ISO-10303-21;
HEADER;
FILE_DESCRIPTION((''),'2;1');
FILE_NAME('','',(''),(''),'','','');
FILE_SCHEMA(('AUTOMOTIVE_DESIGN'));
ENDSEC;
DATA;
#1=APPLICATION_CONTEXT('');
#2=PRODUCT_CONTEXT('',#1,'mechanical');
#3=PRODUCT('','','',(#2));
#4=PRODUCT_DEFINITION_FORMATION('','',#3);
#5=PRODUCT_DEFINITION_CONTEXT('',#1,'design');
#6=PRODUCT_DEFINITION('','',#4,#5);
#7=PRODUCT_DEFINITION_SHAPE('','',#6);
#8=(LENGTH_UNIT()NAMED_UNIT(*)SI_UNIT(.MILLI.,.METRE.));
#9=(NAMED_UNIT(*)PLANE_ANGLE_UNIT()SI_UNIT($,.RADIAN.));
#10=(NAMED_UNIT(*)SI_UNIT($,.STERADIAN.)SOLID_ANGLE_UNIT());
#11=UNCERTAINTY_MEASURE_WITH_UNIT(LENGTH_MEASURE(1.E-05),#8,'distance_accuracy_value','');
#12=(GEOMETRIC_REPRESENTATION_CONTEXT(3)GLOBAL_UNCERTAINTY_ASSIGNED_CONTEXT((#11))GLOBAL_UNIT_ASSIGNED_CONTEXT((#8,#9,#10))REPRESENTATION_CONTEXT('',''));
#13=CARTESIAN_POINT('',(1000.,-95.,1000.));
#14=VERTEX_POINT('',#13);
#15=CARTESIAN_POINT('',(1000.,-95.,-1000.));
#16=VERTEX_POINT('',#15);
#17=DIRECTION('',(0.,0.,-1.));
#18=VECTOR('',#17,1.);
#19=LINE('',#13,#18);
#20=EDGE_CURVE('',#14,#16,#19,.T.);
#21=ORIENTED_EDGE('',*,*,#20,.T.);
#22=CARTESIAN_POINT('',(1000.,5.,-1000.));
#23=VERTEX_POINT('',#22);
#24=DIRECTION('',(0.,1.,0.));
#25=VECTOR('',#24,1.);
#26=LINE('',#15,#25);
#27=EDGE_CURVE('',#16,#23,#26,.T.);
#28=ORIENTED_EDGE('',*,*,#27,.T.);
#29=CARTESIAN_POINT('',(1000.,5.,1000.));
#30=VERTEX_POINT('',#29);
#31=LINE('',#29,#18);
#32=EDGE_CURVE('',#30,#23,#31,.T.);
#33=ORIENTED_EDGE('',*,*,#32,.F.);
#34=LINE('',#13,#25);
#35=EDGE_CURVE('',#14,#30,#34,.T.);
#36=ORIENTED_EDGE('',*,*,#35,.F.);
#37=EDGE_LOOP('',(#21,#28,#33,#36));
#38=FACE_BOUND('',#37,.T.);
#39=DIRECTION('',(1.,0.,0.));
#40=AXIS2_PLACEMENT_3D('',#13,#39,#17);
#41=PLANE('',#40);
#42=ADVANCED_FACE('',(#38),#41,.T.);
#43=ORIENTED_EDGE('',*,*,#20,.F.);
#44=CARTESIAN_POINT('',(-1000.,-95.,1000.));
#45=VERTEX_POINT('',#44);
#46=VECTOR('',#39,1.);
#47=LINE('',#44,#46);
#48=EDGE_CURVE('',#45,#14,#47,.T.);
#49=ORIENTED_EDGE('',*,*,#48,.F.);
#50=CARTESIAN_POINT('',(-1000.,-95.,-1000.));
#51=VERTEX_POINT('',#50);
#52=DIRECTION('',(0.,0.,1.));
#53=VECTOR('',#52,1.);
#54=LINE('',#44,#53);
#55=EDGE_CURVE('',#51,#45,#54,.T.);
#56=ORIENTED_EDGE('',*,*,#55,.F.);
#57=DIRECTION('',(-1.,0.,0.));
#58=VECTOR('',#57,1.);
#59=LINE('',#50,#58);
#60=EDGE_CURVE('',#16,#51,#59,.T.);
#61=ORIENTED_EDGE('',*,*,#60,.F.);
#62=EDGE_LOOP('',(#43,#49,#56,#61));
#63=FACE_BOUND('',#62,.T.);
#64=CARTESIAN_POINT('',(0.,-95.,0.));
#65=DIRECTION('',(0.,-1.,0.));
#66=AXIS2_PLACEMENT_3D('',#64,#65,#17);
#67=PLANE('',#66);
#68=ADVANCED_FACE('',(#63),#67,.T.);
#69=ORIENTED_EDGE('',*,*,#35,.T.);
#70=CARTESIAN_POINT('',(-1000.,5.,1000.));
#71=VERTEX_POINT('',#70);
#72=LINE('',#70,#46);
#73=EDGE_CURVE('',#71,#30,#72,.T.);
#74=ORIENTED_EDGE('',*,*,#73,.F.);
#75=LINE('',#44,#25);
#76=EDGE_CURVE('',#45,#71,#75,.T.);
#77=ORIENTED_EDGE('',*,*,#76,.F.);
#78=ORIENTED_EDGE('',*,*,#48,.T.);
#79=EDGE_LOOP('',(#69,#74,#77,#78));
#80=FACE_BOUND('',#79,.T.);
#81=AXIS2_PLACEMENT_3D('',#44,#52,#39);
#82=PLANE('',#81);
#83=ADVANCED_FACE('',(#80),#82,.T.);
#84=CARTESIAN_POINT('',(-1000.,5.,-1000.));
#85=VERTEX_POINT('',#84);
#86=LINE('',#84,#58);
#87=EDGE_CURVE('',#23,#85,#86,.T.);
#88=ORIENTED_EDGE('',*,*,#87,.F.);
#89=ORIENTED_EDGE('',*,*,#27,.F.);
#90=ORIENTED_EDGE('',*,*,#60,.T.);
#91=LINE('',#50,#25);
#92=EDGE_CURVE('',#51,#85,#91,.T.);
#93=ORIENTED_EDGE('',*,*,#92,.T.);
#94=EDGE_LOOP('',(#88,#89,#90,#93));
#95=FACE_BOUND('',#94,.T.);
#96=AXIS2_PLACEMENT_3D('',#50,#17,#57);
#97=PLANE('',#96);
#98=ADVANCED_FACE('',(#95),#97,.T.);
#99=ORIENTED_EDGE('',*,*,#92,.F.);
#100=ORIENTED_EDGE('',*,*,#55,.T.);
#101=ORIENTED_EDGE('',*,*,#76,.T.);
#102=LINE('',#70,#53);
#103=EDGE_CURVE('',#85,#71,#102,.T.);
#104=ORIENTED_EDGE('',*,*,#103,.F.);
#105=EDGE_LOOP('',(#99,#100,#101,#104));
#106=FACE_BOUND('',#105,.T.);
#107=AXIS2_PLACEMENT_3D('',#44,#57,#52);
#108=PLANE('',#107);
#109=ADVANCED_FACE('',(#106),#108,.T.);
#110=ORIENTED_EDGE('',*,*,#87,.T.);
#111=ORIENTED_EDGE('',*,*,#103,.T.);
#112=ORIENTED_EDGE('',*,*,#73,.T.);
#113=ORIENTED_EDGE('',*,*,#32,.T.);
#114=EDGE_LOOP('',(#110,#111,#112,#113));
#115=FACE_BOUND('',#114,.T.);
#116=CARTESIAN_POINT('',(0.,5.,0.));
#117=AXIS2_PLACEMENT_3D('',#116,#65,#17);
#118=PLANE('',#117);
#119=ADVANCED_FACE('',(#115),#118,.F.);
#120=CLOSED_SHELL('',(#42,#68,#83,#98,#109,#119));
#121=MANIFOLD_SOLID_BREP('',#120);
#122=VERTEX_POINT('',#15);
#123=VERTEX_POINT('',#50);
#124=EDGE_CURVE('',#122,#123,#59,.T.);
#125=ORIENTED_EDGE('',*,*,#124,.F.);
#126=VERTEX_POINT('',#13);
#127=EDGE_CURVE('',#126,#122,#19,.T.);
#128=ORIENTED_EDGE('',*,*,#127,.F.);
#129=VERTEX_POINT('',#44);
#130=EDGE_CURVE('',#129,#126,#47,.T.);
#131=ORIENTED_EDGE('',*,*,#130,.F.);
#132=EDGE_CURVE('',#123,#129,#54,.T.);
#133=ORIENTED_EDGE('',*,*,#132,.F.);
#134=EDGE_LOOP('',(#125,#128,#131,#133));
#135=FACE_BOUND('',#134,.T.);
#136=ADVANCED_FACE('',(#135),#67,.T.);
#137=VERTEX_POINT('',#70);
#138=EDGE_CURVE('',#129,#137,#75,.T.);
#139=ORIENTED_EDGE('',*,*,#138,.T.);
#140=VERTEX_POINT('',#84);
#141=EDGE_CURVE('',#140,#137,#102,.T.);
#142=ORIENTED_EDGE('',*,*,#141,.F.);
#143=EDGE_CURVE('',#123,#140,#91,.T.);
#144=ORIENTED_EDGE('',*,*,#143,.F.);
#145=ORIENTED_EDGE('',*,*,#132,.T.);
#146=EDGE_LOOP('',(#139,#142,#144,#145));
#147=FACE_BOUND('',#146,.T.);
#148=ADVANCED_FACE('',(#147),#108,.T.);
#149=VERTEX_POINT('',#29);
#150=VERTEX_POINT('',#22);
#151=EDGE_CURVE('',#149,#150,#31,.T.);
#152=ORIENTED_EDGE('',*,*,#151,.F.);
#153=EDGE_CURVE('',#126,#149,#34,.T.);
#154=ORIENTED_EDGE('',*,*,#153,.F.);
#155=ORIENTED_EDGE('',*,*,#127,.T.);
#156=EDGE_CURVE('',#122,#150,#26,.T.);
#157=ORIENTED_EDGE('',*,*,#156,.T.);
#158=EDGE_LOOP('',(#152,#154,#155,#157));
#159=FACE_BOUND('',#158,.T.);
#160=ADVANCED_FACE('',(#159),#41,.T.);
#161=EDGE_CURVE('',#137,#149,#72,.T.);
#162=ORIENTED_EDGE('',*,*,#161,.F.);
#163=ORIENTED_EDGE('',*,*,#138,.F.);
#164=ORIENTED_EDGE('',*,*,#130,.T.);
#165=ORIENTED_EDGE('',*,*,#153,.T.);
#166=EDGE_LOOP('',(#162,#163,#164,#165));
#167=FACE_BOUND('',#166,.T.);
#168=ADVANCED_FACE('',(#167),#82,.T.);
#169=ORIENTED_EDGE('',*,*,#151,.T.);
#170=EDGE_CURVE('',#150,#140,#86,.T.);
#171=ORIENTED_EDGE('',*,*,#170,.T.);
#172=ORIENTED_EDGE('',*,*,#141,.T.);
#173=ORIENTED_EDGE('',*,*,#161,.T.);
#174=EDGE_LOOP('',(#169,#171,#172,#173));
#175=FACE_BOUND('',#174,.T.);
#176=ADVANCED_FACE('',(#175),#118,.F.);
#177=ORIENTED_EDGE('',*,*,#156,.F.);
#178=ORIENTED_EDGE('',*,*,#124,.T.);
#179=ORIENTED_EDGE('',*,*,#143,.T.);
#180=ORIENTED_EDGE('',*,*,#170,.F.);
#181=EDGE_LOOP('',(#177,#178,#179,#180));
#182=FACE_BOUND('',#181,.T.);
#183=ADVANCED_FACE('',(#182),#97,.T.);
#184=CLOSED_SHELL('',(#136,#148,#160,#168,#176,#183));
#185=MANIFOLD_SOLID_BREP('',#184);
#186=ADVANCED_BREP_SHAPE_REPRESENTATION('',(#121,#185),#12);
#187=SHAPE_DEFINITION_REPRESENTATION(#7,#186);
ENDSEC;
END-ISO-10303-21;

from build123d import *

# Parameters (mm, degrees)
BOSS_EXTRUDE1_DEPTH       = 5
BOSS_EXTRUDE1_DEPTH_BACK  = 95
SKETCH1_W                 = 2000
SKETCH1_H                 = 2000
BODY_MOVE_COPY1_START     = -1000
BODY_MOVE_COPY1_OUTLINE_W = 100
BODY_MOVE_COPY1_OUTLINE_H = 2000
BODY_MOVE_COPY1_DEPTH     = 2000


# Read off the part's stored shape, not the designer's step: Body-Move/Copy1
with BuildPart() as part:
    # Sketch1 → Boss-Extrude1 (new, two sides: drawn at the far end of the back side and taken through both)
    with BuildSketch(Plane(origin=(0, 0, 0), x_dir=(1, 0, 0), z_dir=(0, 1, 0)).offset(-BOSS_EXTRUDE1_DEPTH_BACK)):
        Rectangle(SKETCH1_W, SKETCH1_H)
    extrude(amount=BOSS_EXTRUDE1_DEPTH + BOSS_EXTRUDE1_DEPTH_BACK)


with BuildPart() as body_2:
    # Body-Move/Copy1 outline → Body-Move/Copy1 (new body)
    with BuildSketch(Plane.YZ.offset(BODY_MOVE_COPY1_START)):
        with Locations((-45, 0)):
            Rectangle(BODY_MOVE_COPY1_OUTLINE_W, BODY_MOVE_COPY1_OUTLINE_H)
    extrude(amount=BODY_MOVE_COPY1_DEPTH)


solid = Compound([part.part, body_2.part])
